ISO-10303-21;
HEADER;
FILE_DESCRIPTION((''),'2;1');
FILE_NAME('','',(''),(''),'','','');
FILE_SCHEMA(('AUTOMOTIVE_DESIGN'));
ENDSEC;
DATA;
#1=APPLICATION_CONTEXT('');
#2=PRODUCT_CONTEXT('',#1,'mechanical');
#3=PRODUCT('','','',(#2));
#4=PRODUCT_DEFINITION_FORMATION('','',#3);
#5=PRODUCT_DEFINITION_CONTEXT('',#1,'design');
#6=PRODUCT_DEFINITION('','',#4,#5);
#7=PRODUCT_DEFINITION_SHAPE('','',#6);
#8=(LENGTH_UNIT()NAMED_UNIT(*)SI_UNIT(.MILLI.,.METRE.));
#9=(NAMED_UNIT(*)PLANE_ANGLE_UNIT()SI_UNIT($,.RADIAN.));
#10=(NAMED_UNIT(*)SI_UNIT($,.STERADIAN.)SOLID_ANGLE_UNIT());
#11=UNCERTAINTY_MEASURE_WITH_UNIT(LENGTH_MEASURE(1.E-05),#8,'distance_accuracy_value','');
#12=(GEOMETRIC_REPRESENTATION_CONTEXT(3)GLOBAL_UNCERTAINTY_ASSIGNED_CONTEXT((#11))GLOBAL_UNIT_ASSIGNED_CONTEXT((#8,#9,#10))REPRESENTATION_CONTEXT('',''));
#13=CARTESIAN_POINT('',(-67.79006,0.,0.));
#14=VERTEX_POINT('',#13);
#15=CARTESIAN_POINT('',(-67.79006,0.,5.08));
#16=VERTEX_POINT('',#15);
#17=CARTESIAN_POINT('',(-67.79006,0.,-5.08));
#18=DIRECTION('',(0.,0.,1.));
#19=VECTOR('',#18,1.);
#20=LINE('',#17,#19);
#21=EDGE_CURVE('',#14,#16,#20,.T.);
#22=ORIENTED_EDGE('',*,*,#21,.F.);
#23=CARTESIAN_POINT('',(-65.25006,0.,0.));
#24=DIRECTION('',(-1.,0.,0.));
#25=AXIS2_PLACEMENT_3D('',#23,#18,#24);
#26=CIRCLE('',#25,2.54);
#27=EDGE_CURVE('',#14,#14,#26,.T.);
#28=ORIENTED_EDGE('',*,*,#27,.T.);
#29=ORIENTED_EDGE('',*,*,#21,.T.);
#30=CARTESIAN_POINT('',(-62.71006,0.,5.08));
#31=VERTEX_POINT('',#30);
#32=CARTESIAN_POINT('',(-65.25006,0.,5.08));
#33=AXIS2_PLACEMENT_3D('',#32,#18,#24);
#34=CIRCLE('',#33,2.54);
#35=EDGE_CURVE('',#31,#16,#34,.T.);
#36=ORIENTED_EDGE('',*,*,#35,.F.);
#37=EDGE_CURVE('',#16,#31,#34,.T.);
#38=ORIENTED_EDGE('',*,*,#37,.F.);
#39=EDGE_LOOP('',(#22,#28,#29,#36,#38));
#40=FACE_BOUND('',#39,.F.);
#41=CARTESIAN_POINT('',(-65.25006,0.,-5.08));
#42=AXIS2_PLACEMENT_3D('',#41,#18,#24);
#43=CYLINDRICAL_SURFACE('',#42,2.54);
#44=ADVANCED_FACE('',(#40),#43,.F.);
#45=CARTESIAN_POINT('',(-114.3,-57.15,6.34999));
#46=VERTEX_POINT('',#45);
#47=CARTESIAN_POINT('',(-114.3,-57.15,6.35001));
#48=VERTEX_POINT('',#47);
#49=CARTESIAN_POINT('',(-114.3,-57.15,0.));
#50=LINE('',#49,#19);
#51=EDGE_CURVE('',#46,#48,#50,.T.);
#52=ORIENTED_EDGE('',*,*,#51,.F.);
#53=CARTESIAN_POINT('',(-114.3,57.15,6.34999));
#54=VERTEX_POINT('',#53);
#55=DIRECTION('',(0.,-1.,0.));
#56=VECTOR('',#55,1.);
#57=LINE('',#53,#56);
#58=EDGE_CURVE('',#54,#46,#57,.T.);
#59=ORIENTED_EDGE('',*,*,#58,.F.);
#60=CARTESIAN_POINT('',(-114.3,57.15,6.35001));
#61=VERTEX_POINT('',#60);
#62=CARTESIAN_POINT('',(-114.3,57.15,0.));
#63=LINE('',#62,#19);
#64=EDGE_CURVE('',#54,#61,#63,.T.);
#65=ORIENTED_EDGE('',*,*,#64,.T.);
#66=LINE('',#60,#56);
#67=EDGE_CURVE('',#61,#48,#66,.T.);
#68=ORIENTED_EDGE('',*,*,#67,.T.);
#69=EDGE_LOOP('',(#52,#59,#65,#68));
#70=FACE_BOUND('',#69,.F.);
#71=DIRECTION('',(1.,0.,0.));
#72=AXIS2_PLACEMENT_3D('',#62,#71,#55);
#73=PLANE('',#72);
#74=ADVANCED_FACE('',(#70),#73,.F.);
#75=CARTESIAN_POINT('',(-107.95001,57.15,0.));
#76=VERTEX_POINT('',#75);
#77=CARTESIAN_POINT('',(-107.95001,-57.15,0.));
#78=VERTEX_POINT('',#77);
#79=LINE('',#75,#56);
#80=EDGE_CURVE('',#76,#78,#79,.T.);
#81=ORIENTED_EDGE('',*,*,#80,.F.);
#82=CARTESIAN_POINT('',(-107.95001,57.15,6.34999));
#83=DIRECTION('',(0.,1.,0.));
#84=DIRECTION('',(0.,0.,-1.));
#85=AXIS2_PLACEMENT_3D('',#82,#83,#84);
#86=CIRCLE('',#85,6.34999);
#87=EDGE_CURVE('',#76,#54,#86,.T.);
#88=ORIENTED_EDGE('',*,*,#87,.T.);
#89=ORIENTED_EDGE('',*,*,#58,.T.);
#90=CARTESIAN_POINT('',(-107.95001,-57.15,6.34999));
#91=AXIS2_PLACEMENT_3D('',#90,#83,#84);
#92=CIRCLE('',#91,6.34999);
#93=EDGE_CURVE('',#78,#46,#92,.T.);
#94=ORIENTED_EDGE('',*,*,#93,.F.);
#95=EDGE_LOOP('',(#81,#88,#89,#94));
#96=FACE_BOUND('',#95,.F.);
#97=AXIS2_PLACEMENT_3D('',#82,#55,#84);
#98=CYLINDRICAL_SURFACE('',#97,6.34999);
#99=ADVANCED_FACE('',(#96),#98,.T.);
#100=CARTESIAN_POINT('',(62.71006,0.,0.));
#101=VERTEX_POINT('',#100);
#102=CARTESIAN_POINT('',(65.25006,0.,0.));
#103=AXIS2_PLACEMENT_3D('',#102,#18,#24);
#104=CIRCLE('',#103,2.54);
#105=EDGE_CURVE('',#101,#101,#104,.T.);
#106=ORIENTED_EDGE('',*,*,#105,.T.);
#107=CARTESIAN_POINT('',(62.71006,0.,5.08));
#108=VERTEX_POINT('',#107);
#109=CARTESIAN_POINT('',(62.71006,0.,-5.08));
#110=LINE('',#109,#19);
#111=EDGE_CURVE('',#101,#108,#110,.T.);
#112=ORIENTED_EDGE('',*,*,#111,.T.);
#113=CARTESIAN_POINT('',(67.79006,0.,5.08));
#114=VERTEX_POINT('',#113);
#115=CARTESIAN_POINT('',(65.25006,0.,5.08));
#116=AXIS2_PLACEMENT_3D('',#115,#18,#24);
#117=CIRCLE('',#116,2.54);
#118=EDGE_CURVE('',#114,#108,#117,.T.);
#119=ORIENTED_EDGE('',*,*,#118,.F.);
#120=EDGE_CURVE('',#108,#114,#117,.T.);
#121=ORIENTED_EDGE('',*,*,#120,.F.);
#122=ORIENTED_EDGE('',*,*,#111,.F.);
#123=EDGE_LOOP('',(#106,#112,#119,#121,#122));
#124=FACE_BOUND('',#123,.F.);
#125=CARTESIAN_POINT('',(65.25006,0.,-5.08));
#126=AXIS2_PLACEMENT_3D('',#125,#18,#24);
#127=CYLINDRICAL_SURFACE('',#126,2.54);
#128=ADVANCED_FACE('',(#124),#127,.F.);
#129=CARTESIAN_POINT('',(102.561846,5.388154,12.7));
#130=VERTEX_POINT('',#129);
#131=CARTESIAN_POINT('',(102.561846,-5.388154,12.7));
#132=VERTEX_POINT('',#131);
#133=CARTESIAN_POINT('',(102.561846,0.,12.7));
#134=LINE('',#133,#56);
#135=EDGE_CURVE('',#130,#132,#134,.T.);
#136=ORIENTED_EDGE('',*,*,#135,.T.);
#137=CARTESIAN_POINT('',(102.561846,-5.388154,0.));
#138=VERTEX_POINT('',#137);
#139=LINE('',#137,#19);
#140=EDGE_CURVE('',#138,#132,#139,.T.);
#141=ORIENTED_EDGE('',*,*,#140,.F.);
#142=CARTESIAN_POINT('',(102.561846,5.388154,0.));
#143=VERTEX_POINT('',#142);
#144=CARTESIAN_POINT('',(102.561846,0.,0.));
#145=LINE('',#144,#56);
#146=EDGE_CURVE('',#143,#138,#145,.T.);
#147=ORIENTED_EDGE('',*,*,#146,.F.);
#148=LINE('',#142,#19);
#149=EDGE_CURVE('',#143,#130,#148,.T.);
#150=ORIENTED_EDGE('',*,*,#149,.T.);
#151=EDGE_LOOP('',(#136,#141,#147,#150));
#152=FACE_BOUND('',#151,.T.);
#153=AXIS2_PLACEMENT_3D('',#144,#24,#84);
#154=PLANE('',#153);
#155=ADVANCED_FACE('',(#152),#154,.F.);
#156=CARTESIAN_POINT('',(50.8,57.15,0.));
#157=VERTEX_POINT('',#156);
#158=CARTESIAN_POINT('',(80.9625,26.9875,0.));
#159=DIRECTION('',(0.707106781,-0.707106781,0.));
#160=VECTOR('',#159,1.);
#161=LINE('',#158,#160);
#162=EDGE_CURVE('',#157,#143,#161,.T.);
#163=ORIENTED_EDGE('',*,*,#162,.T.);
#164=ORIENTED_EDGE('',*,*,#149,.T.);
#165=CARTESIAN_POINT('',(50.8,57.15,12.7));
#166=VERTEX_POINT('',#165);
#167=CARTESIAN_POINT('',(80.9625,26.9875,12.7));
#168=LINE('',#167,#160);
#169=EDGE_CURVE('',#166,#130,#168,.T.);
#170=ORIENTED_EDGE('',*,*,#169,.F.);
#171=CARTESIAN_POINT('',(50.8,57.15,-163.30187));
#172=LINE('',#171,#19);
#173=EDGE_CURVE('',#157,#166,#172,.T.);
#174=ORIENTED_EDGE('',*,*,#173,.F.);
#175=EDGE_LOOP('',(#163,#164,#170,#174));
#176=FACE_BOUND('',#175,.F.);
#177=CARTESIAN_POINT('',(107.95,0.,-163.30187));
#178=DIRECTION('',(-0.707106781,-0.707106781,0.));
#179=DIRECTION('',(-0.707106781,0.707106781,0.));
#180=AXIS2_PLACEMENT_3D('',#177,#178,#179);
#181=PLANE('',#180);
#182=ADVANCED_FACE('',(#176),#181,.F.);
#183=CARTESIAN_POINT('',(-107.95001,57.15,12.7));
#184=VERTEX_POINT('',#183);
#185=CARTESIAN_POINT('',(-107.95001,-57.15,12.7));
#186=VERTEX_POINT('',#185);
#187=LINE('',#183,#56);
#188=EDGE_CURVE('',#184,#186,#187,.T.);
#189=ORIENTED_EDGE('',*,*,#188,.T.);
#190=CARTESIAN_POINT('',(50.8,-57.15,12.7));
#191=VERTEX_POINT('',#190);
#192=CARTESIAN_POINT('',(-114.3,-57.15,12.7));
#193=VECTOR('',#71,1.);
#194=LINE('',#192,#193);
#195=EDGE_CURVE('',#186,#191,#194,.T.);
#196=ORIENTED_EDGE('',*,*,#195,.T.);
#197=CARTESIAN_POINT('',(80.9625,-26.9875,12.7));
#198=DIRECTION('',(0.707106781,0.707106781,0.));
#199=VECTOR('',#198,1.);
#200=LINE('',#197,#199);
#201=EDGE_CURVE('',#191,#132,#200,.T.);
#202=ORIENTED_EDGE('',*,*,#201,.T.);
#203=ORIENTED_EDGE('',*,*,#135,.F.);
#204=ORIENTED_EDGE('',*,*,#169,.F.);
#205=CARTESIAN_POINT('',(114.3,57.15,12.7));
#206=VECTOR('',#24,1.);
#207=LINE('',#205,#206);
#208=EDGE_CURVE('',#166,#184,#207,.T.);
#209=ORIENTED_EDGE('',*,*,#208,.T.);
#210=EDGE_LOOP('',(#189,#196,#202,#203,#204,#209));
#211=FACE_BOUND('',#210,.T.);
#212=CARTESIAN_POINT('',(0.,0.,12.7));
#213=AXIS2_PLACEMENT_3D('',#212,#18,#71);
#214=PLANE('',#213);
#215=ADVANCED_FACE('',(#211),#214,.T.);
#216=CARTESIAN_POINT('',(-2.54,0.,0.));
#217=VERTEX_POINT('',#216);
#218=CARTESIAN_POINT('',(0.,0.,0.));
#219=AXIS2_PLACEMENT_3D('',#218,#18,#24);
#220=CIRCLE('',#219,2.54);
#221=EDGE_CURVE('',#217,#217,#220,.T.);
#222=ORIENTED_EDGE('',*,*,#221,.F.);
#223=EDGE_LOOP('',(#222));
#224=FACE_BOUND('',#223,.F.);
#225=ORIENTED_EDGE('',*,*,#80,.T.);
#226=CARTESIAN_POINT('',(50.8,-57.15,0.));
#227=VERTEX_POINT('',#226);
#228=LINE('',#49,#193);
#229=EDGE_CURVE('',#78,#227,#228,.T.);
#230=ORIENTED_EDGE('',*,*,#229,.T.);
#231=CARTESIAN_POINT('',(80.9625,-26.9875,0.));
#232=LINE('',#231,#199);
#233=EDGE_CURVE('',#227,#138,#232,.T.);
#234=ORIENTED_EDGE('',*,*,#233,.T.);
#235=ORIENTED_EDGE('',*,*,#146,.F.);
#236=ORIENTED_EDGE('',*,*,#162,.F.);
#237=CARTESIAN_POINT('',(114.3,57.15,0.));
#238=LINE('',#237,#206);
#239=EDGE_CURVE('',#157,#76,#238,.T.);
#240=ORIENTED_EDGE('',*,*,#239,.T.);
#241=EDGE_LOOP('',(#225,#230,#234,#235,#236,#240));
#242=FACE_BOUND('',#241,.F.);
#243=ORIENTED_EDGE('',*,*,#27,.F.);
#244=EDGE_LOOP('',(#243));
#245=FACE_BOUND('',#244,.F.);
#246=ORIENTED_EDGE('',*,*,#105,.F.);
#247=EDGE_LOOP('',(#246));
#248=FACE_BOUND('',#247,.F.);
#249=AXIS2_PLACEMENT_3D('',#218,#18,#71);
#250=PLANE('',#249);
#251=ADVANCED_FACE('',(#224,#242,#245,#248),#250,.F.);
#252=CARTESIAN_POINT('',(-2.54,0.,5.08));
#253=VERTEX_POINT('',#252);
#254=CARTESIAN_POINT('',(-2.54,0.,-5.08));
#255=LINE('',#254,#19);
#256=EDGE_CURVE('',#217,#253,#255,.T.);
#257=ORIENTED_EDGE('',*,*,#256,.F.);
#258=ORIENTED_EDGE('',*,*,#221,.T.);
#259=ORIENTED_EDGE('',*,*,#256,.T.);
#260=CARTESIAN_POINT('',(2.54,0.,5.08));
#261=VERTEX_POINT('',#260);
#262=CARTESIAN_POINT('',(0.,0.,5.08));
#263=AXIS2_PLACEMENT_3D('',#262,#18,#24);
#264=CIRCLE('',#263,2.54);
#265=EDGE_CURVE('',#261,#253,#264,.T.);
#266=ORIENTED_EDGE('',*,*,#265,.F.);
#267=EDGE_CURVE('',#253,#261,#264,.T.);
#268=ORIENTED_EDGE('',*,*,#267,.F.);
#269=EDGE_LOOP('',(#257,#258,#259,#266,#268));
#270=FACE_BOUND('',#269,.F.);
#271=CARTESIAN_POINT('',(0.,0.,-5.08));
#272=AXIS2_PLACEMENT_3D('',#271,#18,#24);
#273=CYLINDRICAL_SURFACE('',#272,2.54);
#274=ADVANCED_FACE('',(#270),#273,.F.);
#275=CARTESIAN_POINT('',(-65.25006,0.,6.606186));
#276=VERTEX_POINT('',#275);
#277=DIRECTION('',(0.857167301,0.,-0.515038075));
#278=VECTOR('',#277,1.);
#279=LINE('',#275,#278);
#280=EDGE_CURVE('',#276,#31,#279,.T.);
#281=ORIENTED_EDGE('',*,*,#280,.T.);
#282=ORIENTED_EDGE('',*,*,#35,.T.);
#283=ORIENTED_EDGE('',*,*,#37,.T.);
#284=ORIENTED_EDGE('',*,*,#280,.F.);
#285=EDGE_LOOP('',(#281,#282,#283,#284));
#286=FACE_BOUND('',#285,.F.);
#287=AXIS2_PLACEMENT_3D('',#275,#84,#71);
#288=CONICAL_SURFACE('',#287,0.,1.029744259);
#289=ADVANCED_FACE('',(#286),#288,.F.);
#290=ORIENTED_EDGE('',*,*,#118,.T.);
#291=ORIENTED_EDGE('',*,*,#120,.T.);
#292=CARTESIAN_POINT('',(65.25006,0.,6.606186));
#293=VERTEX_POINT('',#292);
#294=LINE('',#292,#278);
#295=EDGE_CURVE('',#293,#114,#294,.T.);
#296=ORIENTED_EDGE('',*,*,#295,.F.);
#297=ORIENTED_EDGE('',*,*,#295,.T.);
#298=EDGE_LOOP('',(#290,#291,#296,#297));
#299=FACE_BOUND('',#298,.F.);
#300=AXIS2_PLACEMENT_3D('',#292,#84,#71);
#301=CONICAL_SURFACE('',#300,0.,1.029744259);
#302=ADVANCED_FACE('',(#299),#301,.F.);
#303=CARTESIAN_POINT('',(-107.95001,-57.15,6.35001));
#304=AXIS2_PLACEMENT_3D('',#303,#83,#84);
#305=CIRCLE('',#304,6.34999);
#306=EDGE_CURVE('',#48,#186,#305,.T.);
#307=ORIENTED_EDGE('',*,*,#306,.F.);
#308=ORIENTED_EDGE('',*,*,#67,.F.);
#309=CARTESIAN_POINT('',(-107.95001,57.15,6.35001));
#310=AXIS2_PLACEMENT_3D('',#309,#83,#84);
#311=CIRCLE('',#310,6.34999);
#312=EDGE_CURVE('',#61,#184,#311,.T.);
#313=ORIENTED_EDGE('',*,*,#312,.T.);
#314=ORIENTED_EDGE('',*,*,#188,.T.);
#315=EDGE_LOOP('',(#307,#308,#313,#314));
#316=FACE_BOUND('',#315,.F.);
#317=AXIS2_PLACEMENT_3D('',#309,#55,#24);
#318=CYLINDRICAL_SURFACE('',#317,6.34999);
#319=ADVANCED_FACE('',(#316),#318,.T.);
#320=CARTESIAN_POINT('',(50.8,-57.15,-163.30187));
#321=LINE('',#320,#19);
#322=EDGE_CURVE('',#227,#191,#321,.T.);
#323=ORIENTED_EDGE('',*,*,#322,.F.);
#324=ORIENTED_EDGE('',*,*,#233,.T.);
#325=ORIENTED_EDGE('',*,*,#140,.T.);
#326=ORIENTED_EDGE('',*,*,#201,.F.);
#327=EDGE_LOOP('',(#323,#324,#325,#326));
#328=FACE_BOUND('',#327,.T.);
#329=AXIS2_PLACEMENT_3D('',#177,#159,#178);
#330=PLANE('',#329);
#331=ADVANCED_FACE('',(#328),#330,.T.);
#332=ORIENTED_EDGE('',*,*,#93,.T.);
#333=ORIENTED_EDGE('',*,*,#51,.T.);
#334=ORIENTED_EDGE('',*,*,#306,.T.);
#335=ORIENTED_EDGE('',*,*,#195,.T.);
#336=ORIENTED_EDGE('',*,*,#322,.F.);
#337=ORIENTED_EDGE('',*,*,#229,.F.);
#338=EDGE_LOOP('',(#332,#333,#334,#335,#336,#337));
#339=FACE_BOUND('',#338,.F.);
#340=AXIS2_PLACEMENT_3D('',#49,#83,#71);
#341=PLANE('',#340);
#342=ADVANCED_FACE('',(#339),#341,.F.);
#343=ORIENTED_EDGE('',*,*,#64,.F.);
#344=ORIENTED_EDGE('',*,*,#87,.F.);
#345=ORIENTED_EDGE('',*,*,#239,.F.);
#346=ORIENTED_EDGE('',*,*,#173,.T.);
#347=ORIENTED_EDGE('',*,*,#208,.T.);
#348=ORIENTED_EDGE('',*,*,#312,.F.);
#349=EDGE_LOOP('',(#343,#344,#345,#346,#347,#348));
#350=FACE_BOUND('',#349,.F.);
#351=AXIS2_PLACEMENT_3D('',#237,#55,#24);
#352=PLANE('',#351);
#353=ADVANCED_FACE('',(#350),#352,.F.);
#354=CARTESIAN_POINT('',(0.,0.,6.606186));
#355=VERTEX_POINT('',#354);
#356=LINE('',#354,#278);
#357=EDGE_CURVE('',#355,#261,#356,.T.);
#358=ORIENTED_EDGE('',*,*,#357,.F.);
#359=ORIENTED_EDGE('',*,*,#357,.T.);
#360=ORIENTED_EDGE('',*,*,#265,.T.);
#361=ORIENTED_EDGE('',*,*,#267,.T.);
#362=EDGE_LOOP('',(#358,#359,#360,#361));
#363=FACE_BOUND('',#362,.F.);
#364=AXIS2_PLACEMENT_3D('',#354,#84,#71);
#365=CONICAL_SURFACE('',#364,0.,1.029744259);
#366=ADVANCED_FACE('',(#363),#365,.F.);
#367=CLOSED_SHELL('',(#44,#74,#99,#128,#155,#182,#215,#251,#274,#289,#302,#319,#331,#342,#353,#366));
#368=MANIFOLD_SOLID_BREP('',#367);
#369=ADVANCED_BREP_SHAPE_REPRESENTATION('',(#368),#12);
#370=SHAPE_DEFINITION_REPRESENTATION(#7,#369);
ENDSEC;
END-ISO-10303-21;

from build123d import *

# Parameters (mm, degrees)
F1_DEPTH    = 12.7
F2_D        = 5.08
F2_DEPTH    = 5.08
F2_TIP      = 1.5261859723
F3_D        = 5.08
F3_DEPTH    = 5.08
F3_TIP      = 1.5261859723
F4_T1_DEPTH = 339.3037394717
F5_SIZE     = 7.62
F6_R        = 6.34999


# Not quite as in the source:
# - a fillet or chamfer that OpenCascade refuses, or shapes differently, is made with other operations: its cross-section is extruded or revolved along the edge and cut away or added
# - a fillet or chamfer is up to 0.001 mm smaller than in the source, because OpenCascade refuses the exact size


with BuildPart() as f1:
    # F0 (on Top) → F1 (new body)
    with BuildSketch(Plane.XY):
        Polygon((114.3, 27.94), (114.3, 57.15), (82.55, 57.15), (-114.3, 57.15), (-114.3, -57.15), (82.55, -57.15), (114.3, -57.15), (114.3, -27.94), align=None)
    extrude(amount=F1_DEPTH)

    # F2
    with Locations(Plane(origin=(0, 0, 0), x_dir=(1, 0, 0), z_dir=(0, 0, -1))):
        with Locations((-65.25006, 0)):
            Hole(F2_D / 2, depth=F2_DEPTH)
            with Locations((0, 0, -(F2_DEPTH + F2_TIP / 2))):  # 118° drill point
                Cone(0, F2_D / 2, F2_TIP, mode=Mode.SUBTRACT)

    # F3
    with Locations(Plane(origin=(0, 0, 0), x_dir=(1, 0, 0), z_dir=(0, 0, -1))):
        with Locations((0, 0), (65.25006, 0)):
            Hole(F3_D / 2, depth=F3_DEPTH)
            with Locations((0, 0, -(F3_DEPTH + F3_TIP / 2))):  # 118° drill point
                Cone(0, F3_D / 2, F3_TIP, mode=Mode.SUBTRACT)

    # F4: chamfer of 63.5 on 2 edges, made by hand

    # F4_s2 → F4_t1 (cut)
    with BuildSketch(Plane.XY.offset(-163.3018697358)):
        Polygon((114.3, -6.35), (50.8, 57.15), (114.3, 57.15), align=None)
        Polygon((114.3, 6.35), (50.8, -57.15), (114.3, -57.15), align=None)
    extrude(amount=F4_T1_DEPTH, mode=Mode.SUBTRACT)

    # F5
    f5_edges = [f1.edges().sort_by_distance(p)[0] for p in [
        (107.95, 0, 6.35),
    ]]
    chamfer(f5_edges, length=F5_SIZE)

    # F6 (radius 6.35 in the source; OpenCascade refuses exactly that, so slightly less here)
    f6_edges = [f1.edges().sort_by_distance(p)[0] for p in [
        (-114.3, 0, 0),
        (-114.3, 0, 12.7),
    ]]
    fillet(f6_edges, radius=F6_R)


solid = f1.part
